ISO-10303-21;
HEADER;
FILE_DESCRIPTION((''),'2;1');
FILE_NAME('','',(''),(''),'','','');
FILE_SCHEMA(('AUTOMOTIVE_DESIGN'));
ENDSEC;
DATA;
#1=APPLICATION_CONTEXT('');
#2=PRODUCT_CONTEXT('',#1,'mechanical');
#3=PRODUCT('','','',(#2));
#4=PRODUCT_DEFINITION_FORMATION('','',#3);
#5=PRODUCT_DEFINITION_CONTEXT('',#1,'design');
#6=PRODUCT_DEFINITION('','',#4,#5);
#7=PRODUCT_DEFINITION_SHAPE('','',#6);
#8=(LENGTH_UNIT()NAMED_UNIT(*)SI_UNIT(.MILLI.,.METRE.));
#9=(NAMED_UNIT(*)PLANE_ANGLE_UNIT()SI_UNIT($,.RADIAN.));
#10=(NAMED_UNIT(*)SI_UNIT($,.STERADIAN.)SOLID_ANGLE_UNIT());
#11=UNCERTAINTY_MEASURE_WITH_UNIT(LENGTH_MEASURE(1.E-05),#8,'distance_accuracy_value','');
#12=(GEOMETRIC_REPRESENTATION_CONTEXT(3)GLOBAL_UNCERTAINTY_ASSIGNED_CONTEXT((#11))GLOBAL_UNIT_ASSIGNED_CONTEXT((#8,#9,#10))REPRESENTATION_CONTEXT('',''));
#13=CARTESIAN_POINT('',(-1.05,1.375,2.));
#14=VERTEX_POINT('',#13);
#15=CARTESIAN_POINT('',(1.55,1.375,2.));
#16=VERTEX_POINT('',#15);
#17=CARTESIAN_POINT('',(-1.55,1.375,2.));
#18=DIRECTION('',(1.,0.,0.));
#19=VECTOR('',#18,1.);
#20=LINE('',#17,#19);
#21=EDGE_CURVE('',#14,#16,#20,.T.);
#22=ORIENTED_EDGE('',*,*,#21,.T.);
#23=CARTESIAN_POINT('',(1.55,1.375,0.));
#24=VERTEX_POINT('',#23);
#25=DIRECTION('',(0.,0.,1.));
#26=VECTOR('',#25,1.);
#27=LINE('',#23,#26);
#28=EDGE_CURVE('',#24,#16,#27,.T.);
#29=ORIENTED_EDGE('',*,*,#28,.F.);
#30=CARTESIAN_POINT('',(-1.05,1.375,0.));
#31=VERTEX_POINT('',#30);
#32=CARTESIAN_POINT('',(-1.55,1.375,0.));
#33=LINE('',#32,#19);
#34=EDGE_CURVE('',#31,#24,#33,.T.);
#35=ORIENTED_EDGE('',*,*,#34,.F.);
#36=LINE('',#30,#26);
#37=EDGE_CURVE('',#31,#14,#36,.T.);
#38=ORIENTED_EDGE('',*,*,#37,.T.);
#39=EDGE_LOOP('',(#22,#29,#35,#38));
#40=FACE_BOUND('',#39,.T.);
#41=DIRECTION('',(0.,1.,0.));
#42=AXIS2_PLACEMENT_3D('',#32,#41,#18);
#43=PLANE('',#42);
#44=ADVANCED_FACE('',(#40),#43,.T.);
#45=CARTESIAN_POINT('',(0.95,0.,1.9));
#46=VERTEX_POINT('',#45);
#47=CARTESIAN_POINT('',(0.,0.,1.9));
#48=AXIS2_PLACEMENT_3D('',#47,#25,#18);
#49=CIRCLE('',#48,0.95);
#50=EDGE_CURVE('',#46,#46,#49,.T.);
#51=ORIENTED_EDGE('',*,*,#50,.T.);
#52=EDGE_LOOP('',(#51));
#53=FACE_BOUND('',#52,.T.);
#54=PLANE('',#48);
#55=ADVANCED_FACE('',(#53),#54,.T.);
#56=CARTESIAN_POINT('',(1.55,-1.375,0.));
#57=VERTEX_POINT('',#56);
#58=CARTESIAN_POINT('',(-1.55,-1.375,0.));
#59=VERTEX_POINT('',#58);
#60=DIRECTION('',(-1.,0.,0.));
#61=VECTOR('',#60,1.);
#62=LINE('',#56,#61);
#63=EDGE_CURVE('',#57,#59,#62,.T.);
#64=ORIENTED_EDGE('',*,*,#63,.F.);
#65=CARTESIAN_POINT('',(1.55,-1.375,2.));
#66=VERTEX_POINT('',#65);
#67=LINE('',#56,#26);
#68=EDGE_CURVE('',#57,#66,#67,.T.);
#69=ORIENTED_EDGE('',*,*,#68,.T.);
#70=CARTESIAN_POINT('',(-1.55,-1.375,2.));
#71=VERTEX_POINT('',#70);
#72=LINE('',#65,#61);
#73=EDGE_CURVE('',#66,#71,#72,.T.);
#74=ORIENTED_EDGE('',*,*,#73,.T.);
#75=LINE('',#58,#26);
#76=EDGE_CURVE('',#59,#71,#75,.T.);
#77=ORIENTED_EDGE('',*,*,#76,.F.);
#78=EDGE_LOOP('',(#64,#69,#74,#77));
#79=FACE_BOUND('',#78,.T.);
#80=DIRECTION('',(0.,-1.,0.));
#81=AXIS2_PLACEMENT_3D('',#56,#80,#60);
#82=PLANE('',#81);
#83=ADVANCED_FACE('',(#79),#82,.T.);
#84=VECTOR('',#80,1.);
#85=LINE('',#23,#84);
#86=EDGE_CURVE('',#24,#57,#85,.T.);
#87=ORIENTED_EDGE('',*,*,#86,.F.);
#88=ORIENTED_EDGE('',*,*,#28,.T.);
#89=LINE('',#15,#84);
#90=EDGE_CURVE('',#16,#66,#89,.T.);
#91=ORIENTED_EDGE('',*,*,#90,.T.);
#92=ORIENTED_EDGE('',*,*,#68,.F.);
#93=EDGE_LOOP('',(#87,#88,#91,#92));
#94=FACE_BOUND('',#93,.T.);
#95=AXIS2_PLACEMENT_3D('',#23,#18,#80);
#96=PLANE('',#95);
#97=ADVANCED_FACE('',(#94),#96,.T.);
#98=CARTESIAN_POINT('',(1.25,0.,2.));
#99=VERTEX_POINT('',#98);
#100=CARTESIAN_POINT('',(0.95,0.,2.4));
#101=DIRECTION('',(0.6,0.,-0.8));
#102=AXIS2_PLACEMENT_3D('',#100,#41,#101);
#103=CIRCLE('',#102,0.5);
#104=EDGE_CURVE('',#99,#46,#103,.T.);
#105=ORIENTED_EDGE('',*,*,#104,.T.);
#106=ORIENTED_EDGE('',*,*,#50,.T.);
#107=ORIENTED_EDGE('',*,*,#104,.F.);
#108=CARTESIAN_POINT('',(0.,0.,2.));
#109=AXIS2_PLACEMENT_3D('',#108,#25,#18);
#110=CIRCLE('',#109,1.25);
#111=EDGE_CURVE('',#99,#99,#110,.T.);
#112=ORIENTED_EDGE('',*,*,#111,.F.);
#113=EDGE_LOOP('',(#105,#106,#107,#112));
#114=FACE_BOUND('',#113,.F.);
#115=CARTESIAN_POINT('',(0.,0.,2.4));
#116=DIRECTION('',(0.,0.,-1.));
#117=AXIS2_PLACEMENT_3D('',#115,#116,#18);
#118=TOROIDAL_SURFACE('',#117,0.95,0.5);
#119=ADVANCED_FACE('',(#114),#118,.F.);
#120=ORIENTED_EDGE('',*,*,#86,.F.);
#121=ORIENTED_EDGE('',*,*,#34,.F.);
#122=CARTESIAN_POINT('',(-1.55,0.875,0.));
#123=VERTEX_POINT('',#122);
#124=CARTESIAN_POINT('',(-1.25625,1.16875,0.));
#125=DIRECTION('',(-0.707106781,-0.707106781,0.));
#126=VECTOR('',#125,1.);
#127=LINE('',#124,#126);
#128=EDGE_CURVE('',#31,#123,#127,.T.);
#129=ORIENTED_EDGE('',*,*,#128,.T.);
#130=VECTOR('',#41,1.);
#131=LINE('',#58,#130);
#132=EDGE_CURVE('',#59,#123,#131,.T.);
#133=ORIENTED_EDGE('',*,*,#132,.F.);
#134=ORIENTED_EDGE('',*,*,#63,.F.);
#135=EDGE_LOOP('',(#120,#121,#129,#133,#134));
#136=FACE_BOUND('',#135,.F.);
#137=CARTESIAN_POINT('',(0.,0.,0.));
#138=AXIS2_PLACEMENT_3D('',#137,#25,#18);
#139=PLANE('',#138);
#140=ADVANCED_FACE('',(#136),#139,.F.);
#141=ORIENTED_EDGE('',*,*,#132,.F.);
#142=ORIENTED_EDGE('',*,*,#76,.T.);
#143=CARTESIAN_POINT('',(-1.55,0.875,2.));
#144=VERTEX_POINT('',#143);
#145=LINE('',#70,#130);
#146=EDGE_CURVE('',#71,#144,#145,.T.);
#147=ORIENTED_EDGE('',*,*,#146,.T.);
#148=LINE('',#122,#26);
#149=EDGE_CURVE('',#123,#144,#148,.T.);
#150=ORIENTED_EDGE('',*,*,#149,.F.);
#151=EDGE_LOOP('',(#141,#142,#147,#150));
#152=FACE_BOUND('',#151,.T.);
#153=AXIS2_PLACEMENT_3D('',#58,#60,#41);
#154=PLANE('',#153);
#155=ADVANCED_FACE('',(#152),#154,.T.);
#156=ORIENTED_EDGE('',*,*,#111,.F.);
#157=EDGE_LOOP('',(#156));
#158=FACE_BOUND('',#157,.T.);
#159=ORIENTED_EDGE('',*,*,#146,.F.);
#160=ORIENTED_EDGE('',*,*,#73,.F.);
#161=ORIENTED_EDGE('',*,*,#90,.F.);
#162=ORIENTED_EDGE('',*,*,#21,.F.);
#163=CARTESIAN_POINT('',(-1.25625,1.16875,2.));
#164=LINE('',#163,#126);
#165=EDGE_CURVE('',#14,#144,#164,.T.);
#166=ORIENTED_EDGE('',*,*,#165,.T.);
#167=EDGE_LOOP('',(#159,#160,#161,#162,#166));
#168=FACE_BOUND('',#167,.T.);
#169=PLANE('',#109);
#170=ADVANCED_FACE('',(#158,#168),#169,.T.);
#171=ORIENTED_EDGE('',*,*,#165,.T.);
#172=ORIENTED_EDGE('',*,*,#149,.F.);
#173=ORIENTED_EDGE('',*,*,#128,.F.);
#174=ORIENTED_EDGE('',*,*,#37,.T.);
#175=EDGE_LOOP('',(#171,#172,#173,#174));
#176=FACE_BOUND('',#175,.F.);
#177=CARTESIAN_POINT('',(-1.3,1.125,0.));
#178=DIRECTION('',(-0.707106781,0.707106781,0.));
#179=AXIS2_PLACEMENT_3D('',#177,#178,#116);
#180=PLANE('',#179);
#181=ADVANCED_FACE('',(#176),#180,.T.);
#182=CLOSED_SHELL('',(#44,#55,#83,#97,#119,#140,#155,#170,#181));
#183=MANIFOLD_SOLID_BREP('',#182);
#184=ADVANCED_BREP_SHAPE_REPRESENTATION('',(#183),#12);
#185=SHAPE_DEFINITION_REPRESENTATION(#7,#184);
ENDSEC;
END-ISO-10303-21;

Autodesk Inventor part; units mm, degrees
ref_plane "YZ Plane" through (0, 0, 0) normal (1, 0, 0) x (0, 1, 0)
ref_plane "XZ Plane" through (0, 0, 0) normal (0, 1, 0) x (-1, 0, 0)
ref_plane "XY Plane" through (0, 0, 0) normal (0, 0, 1) x (1, 0, 0)
sketch "Szkic1" plane through (0, 0, 0) normal (0, 0, 1) x (1, 0, 0)
  line L0 (-1.55, 1.375) -> (1.55, 1.375)
  line L1 (1.55, 1.375) -> (1.55, -1.375)
  line L2 (1.55, -1.375) -> (-1.55, -1.375)
  line L3 (-1.55, -1.375) -> (-1.55, 1.375)
  point P0 (0, 0)
  dimension "d0" = 3.1
  dimension "d1" = 2.75
  dimension "d15" = 1.375
  dimension "d16" = 1.55
extrude "Wyciągnięcie proste1" add sketch "Szkic1" along normal blind 2
chamfer "Faza1" distance 0.5 angle 45 1 edges at (-1.55, 1.375, 1)
sketch "Szkic2" plane through (0, 0, 2) normal (0, 0, 1) x (1, 0, 0)
  line L0 (1.55, 1.375) -> (-1.05, 1.375) projected
  line L1 (-1.55, -1.375) -> (1.55, -1.375) projected
  line L2 (-1.55, 0.875) -> (-1.55, -1.375) projected
  circle A0 centre (0, 0) radius 1.25
  point P0 (0, 0)
  dimension "d7" = 2.75
  dimension "d8" = 1.375
  dimension "d9" = 3.1
  dimension "d10" = 1.55
  dimension "d11" = 2.5
extrude "Wyciągnięcie proste2" cut sketch "Szkic2" against normal blind 0.1
fillet "Zaokrąglenie1" radius 0.5 1 edges at (-1.25, 0, 1.9)
equation "\"d15\" = 0.5 * d1"
equation "\"d16\" = 0.5 * d0"
equation "\"d8\" = 0.5 * d7"
equation "\"d10\" = 0.5 * d9"
properties part number "led od paska ledów"
